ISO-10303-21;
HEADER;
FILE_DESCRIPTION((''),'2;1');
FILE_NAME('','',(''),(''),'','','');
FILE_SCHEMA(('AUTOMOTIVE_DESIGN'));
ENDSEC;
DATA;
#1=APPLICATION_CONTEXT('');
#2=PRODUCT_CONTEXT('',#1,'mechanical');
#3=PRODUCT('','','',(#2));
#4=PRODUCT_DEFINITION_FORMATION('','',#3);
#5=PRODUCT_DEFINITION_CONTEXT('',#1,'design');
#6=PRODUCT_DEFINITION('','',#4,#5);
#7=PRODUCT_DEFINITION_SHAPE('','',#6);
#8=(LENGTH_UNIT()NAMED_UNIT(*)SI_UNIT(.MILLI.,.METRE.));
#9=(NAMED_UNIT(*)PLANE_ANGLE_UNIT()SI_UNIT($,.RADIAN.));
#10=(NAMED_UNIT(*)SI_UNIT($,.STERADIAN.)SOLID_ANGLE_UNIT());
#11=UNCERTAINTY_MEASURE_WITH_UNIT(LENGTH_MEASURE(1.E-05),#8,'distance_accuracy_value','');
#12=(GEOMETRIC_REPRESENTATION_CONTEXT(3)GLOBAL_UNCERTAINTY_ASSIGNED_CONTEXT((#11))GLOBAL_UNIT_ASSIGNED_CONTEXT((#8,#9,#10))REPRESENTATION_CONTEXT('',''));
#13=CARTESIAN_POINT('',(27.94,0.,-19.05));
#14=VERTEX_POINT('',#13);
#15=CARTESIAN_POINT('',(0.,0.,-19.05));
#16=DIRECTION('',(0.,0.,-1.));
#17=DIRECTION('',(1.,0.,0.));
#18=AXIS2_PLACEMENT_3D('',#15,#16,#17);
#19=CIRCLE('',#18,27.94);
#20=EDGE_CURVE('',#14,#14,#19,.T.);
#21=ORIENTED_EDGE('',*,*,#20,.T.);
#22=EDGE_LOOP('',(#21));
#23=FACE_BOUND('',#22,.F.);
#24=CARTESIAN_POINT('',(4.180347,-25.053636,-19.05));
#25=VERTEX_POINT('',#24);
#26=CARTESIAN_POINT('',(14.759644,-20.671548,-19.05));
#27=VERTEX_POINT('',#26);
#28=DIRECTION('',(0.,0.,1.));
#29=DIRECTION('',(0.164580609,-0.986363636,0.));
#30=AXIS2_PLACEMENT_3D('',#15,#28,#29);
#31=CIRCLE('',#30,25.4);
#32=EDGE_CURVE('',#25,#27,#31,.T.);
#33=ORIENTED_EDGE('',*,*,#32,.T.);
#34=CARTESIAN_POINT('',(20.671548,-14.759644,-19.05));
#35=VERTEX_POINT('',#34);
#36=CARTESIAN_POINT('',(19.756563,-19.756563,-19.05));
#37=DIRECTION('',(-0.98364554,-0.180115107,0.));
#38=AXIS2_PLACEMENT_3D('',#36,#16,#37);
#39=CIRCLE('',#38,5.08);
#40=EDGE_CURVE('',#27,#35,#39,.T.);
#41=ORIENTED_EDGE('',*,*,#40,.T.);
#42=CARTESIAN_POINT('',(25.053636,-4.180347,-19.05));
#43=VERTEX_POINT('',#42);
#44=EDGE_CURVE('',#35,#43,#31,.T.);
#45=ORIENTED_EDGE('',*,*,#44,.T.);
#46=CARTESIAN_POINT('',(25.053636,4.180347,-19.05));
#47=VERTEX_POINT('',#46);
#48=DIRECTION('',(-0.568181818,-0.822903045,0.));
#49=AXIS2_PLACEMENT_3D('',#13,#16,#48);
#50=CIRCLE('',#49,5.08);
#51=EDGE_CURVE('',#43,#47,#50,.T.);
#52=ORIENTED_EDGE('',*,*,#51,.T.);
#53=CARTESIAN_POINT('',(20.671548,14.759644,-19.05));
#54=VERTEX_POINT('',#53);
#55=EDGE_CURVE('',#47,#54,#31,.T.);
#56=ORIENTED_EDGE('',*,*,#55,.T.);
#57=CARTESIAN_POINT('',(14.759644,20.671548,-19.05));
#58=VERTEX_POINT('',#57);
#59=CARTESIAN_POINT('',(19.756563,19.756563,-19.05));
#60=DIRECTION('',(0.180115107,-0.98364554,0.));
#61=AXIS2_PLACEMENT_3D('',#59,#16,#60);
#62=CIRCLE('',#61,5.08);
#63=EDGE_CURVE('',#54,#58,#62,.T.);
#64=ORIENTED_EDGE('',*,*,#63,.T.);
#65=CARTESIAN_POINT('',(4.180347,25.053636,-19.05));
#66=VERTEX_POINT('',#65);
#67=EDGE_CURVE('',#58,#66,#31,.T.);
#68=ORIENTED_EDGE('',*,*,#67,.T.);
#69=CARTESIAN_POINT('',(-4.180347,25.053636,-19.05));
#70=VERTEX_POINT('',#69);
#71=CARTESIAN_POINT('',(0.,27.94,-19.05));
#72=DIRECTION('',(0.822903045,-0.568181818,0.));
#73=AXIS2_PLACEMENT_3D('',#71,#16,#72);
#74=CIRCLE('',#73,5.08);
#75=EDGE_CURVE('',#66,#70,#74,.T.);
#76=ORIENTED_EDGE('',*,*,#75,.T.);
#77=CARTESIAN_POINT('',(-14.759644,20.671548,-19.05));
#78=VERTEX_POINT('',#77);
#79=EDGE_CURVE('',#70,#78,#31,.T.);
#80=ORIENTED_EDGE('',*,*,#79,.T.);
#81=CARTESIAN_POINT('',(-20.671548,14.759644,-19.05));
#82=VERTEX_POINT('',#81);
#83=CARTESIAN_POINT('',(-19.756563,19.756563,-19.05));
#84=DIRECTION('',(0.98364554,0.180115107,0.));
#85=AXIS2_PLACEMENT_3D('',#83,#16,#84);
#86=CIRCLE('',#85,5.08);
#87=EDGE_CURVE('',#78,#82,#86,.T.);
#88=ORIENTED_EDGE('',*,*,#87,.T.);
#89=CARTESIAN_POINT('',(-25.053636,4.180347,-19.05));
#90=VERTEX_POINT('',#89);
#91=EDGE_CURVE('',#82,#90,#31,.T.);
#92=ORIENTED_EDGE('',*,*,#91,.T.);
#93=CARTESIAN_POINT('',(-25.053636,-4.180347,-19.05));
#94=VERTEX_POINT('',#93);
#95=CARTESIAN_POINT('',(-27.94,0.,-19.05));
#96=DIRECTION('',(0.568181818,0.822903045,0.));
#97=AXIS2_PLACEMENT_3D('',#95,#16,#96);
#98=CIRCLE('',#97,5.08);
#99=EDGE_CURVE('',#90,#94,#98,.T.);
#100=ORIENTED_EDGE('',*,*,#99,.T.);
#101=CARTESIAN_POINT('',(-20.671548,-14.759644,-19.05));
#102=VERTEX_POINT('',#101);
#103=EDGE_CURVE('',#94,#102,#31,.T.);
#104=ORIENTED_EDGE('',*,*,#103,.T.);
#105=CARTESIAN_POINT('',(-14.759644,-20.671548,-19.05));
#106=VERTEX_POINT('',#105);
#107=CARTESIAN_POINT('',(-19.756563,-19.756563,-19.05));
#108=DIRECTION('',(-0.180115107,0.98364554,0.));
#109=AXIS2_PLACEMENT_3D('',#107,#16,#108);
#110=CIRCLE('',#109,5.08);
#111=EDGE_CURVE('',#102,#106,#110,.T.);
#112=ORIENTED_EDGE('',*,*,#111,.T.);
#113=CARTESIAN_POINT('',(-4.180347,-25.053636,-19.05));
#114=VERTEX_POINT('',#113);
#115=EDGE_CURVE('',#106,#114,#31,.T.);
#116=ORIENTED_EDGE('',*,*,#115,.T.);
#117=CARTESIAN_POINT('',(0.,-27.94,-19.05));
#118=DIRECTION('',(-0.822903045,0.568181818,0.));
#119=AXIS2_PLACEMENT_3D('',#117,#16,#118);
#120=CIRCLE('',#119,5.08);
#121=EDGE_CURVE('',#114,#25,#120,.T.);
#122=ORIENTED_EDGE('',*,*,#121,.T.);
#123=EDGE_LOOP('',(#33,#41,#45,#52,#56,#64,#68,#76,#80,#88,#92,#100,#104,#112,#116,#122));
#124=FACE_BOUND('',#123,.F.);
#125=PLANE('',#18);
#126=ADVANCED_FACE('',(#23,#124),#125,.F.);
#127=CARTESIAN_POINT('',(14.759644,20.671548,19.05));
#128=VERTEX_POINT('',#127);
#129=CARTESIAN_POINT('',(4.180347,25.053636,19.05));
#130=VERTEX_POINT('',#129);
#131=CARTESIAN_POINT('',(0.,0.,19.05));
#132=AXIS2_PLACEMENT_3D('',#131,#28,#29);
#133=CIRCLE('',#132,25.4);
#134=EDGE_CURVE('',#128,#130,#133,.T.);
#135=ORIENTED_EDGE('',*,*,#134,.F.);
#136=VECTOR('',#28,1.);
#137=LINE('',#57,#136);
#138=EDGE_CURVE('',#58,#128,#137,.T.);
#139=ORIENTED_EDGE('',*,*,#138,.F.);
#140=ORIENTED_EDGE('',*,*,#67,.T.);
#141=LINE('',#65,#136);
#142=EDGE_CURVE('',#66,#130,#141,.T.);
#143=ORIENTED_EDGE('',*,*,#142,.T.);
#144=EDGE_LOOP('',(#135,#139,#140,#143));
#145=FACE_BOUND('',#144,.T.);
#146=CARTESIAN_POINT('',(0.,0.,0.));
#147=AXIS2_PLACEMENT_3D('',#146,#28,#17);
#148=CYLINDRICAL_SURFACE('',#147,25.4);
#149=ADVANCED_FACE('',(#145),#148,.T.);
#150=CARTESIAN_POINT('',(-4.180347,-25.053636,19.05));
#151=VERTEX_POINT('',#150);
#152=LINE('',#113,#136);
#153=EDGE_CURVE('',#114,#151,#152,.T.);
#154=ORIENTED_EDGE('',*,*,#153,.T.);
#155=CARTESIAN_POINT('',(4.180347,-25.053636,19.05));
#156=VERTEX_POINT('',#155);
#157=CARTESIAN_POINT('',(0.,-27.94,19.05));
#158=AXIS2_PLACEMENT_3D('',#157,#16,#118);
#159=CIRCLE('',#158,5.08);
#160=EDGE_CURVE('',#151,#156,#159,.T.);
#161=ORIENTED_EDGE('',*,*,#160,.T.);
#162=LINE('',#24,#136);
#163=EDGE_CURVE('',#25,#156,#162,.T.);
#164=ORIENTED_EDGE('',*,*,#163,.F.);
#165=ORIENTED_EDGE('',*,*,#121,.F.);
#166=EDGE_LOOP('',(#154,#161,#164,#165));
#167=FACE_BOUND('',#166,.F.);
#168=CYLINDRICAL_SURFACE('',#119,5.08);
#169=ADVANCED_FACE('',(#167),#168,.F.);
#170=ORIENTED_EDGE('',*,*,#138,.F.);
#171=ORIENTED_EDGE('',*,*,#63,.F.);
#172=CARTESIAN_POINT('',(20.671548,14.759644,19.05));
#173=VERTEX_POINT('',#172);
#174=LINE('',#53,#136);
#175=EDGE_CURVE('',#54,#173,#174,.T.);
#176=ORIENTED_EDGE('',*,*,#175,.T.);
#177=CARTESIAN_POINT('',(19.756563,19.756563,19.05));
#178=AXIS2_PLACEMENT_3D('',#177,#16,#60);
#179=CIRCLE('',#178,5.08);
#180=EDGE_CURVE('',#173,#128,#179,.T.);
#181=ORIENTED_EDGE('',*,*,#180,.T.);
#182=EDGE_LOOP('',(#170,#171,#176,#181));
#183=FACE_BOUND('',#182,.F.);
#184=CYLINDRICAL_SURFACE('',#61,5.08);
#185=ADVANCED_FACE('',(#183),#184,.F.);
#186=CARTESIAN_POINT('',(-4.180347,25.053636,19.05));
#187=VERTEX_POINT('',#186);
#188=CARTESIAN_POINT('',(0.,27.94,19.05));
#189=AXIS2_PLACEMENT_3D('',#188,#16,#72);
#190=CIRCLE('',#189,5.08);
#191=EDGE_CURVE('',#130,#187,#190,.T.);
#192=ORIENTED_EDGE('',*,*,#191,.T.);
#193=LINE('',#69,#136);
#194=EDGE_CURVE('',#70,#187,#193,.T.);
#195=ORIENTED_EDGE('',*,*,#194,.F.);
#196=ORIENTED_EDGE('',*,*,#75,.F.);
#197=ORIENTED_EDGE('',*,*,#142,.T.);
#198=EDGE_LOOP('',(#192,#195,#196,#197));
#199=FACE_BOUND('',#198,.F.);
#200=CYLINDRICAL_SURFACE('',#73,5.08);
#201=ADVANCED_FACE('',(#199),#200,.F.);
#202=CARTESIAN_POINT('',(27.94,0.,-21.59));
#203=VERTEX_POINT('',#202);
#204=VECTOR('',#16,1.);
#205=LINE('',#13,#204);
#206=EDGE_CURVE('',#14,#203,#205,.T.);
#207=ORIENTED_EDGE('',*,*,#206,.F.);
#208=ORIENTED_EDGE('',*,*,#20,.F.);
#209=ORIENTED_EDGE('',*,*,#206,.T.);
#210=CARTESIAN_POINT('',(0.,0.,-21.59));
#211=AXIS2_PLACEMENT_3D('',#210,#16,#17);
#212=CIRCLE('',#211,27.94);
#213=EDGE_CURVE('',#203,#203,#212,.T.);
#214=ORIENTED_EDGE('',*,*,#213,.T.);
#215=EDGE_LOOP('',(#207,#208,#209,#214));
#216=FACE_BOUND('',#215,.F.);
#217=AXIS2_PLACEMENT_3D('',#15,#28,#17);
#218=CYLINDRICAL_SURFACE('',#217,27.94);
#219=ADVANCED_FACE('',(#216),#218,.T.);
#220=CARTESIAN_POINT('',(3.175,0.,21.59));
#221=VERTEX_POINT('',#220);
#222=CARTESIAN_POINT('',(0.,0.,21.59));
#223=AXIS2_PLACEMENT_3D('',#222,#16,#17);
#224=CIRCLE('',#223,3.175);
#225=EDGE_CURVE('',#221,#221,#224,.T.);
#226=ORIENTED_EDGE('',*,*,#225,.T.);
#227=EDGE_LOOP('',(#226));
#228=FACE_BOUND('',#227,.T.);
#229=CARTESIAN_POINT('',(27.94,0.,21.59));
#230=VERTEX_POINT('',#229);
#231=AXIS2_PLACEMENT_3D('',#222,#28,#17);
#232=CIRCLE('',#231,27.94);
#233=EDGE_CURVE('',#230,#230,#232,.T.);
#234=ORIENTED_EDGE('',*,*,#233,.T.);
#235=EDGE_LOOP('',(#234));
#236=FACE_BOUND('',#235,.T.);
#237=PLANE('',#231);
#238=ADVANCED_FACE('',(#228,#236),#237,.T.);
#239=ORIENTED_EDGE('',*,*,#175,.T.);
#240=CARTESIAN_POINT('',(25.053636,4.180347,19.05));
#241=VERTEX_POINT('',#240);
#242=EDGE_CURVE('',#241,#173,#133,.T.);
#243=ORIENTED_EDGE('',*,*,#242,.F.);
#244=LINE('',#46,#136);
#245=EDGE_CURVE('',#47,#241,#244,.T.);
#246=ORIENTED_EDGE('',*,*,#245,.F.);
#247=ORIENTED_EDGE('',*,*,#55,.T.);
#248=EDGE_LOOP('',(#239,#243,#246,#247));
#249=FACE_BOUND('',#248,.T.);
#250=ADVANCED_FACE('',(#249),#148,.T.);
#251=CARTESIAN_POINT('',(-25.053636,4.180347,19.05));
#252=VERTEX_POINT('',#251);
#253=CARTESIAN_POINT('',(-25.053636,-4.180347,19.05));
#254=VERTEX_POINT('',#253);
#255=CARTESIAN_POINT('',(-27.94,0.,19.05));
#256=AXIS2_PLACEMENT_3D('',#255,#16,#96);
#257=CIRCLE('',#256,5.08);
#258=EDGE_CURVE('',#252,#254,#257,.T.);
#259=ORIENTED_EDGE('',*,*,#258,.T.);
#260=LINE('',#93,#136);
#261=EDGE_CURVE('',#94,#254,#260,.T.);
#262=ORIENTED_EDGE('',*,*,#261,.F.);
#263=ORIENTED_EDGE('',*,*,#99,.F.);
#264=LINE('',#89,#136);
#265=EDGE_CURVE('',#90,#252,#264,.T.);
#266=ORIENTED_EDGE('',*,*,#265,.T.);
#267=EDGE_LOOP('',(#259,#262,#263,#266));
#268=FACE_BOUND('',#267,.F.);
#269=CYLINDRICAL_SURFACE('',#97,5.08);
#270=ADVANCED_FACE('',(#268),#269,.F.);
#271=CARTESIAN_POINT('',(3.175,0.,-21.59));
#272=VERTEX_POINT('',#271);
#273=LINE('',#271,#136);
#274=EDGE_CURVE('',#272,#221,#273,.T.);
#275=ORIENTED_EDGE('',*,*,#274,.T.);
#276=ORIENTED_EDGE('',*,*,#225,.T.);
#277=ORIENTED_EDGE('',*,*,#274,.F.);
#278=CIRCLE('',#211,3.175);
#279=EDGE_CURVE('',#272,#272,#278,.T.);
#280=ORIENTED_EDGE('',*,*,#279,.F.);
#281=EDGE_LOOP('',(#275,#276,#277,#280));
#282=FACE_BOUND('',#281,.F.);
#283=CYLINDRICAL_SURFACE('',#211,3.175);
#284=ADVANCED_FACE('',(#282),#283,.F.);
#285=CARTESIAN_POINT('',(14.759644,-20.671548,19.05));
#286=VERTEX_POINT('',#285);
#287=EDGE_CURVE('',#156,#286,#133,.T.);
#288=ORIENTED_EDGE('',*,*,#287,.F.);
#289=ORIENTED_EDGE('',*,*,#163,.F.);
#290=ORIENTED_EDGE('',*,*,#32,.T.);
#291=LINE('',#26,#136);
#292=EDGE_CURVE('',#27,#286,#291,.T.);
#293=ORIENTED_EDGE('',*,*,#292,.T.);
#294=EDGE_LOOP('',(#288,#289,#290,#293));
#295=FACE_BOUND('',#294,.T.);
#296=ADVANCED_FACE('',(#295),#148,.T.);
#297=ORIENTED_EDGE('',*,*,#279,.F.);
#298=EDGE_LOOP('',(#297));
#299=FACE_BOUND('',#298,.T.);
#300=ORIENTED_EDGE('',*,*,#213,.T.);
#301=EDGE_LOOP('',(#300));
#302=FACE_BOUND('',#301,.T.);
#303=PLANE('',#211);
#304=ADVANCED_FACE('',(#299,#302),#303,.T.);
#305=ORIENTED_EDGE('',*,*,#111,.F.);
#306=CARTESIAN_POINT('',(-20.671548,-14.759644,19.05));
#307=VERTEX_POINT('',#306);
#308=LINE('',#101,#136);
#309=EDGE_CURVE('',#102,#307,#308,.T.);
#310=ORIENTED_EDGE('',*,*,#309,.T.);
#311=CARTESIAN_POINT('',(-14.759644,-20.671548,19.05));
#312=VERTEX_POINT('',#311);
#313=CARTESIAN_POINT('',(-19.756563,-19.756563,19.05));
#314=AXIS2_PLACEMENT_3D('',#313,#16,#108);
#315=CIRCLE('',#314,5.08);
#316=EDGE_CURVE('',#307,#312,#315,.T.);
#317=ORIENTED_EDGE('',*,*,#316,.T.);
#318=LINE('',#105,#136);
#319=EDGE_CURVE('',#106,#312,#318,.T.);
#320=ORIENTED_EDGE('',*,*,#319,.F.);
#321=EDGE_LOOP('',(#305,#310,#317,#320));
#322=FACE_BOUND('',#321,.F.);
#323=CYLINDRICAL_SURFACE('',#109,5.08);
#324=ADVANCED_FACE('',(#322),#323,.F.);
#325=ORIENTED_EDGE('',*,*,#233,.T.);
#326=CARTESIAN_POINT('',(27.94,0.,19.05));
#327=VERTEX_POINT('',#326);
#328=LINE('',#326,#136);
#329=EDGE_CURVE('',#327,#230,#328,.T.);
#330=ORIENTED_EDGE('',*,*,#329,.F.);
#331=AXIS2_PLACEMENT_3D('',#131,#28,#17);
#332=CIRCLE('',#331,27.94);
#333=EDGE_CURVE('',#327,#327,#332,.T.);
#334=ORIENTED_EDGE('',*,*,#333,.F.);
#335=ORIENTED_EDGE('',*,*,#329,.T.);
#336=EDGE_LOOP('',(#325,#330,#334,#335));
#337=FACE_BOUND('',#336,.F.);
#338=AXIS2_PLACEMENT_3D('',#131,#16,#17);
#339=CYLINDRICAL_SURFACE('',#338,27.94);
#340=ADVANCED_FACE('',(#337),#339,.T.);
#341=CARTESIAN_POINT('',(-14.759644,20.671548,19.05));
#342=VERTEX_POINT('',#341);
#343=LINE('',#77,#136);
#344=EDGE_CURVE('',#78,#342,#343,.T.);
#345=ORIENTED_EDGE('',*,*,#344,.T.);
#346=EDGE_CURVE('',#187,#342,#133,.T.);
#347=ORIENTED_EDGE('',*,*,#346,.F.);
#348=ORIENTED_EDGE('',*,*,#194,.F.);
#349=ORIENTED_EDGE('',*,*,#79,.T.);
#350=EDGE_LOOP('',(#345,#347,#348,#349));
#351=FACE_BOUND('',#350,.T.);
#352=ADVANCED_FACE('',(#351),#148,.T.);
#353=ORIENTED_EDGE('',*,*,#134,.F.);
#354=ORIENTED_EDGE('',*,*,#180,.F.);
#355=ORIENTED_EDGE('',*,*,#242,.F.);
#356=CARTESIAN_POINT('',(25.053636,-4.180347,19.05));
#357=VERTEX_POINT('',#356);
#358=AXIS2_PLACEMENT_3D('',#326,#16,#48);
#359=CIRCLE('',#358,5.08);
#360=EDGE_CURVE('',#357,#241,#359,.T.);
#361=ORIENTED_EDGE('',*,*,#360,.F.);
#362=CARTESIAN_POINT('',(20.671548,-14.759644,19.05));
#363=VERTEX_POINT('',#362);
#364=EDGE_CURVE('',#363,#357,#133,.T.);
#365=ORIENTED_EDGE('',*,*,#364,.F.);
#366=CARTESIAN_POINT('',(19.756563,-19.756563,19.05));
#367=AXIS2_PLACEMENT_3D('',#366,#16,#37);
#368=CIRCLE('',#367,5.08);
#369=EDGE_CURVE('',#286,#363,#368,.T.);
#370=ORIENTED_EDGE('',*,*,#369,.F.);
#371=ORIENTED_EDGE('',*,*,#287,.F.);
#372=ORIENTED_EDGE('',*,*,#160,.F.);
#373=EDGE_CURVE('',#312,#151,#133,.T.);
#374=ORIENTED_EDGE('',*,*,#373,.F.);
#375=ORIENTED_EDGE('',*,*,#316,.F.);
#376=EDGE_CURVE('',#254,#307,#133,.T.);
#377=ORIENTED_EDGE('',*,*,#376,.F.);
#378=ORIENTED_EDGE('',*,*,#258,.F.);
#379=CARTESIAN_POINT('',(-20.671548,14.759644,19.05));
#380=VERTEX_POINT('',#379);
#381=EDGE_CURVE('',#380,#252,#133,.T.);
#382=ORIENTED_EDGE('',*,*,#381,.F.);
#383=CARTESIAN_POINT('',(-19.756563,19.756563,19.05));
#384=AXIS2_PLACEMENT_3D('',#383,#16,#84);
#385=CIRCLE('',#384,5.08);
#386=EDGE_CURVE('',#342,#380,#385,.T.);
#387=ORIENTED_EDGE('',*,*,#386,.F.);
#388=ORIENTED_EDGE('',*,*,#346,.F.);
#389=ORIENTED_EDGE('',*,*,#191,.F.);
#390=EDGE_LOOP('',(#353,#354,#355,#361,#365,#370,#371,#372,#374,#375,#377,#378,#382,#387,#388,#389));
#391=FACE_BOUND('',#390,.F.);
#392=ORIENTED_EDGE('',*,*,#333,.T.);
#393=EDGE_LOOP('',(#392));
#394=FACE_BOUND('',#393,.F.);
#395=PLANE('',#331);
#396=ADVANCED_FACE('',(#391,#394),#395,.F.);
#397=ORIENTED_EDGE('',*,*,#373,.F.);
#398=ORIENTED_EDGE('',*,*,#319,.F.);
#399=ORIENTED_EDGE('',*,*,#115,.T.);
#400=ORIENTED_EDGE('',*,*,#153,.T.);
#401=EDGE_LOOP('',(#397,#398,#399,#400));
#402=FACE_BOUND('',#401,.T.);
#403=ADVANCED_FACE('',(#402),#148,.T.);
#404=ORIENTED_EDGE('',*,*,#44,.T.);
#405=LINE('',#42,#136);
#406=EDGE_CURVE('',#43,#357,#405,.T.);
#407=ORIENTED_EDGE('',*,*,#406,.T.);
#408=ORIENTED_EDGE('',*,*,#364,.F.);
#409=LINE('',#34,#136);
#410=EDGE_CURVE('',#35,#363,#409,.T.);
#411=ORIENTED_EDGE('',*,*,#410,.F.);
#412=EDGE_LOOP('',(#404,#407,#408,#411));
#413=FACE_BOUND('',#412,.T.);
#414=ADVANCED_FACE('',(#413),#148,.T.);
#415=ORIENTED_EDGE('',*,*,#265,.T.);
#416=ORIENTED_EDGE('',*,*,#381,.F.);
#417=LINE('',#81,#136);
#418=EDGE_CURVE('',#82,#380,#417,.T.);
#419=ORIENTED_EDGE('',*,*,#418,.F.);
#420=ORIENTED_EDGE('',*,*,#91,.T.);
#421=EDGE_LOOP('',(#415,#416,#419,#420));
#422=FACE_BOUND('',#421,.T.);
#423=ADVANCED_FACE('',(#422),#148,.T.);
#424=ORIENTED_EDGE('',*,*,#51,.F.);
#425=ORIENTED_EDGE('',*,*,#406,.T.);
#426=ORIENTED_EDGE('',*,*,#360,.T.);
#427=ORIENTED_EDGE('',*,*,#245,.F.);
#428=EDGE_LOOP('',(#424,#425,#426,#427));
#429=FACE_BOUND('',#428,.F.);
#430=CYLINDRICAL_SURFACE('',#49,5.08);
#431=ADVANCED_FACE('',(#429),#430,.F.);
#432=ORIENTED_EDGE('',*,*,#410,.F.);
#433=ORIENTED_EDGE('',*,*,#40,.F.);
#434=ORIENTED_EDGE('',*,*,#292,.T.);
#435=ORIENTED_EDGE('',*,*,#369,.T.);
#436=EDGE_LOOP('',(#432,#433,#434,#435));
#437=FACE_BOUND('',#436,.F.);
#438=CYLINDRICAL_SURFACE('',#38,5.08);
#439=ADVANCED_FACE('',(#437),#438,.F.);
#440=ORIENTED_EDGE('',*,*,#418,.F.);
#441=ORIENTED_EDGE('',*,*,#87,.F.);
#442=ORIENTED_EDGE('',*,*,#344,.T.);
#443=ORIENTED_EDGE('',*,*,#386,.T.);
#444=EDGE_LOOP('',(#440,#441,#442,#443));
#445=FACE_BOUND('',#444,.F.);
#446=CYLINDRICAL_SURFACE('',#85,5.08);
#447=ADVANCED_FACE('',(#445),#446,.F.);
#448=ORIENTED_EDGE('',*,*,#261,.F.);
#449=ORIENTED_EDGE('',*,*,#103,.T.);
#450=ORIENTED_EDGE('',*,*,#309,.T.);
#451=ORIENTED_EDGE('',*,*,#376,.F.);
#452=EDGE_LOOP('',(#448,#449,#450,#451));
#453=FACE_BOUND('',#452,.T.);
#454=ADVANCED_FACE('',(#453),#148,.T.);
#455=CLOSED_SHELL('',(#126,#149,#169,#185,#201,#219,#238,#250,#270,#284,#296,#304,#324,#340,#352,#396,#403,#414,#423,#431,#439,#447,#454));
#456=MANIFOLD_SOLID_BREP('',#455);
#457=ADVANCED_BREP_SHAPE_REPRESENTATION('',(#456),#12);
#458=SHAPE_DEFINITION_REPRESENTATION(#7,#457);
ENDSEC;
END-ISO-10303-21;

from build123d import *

# Parameters (mm, degrees)
F0_R            = 25.4
F1_DEPTH        = 19.05
F2_R            = 27.94
F2_R_2          = 25.4
F3_DEPTH        = 2.54
F5_DEPTH        = 38.1
F5_COPIES_COUNT = 8
F6_R            = 27.94
F7_DEPTH        = 2.54
F8_R            = 3.175
F9_DEPTH        = 43.181


# Not quite as in the source:
# - a pattern or mirror of a feature is missing from the dataset's text; its kind, count and spacing are read off the source's solid


with BuildPart() as f1:
    # F0 (on Top) → F1 (new body, symmetric)
    with BuildSketch(Plane.XY):
        Circle(F0_R)
    extrude(amount=F1_DEPTH, both=True)

    # F2 (on face) → F3 (join)
    with BuildSketch(Plane.XY.offset(19.05)):
        Circle(F2_R)
        Circle(F2_R_2, mode=Mode.SUBTRACT)
        Circle(F2_R_2)
    extrude(amount=F3_DEPTH)

    # F4 (on face) → F5 (cut, through all)
    with BuildSketch(Plane(origin=(0, 0, -19.05), x_dir=(1, 0, 0), z_dir=(0, 0, -1))):
        with BuildLine():
            ThreePointArc((4.1803474687, 25.0536363636), (0, 25.4), (-4.1803474687, 25.0536363636))
            ThreePointArc((-4.1803474687, 25.0536363636), (0, 22.86), (4.1803474687, 25.0536363636))
        make_face()
    f5 = extrude(amount=-F5_DEPTH, mode=Mode.SUBTRACT)

    # F5_copies: F5 ×8 about axis
    f5_copies_axis = Axis((0, 0, 0), (0, 0, 1))
    for i in range(1, F5_COPIES_COUNT):
        add(f5.rotate(f5_copies_axis, i * 360 / F5_COPIES_COUNT), mode=Mode.SUBTRACT)

    # F6 (on face) → F7 (join)
    with BuildSketch(Plane(origin=(0, 0, -19.05), x_dir=(1, 0, 0), z_dir=(0, 0, -1))):
        Circle(F6_R)
    extrude(amount=F7_DEPTH)

    # F8 (on face) → F9 (cut, through all)
    with BuildSketch(Plane(origin=(0, 0, -21.59), x_dir=(1, 0, 0), z_dir=(0, 0, -1))):
        Circle(F8_R)
    extrude(amount=-F9_DEPTH, mode=Mode.SUBTRACT)


solid = f1.part
